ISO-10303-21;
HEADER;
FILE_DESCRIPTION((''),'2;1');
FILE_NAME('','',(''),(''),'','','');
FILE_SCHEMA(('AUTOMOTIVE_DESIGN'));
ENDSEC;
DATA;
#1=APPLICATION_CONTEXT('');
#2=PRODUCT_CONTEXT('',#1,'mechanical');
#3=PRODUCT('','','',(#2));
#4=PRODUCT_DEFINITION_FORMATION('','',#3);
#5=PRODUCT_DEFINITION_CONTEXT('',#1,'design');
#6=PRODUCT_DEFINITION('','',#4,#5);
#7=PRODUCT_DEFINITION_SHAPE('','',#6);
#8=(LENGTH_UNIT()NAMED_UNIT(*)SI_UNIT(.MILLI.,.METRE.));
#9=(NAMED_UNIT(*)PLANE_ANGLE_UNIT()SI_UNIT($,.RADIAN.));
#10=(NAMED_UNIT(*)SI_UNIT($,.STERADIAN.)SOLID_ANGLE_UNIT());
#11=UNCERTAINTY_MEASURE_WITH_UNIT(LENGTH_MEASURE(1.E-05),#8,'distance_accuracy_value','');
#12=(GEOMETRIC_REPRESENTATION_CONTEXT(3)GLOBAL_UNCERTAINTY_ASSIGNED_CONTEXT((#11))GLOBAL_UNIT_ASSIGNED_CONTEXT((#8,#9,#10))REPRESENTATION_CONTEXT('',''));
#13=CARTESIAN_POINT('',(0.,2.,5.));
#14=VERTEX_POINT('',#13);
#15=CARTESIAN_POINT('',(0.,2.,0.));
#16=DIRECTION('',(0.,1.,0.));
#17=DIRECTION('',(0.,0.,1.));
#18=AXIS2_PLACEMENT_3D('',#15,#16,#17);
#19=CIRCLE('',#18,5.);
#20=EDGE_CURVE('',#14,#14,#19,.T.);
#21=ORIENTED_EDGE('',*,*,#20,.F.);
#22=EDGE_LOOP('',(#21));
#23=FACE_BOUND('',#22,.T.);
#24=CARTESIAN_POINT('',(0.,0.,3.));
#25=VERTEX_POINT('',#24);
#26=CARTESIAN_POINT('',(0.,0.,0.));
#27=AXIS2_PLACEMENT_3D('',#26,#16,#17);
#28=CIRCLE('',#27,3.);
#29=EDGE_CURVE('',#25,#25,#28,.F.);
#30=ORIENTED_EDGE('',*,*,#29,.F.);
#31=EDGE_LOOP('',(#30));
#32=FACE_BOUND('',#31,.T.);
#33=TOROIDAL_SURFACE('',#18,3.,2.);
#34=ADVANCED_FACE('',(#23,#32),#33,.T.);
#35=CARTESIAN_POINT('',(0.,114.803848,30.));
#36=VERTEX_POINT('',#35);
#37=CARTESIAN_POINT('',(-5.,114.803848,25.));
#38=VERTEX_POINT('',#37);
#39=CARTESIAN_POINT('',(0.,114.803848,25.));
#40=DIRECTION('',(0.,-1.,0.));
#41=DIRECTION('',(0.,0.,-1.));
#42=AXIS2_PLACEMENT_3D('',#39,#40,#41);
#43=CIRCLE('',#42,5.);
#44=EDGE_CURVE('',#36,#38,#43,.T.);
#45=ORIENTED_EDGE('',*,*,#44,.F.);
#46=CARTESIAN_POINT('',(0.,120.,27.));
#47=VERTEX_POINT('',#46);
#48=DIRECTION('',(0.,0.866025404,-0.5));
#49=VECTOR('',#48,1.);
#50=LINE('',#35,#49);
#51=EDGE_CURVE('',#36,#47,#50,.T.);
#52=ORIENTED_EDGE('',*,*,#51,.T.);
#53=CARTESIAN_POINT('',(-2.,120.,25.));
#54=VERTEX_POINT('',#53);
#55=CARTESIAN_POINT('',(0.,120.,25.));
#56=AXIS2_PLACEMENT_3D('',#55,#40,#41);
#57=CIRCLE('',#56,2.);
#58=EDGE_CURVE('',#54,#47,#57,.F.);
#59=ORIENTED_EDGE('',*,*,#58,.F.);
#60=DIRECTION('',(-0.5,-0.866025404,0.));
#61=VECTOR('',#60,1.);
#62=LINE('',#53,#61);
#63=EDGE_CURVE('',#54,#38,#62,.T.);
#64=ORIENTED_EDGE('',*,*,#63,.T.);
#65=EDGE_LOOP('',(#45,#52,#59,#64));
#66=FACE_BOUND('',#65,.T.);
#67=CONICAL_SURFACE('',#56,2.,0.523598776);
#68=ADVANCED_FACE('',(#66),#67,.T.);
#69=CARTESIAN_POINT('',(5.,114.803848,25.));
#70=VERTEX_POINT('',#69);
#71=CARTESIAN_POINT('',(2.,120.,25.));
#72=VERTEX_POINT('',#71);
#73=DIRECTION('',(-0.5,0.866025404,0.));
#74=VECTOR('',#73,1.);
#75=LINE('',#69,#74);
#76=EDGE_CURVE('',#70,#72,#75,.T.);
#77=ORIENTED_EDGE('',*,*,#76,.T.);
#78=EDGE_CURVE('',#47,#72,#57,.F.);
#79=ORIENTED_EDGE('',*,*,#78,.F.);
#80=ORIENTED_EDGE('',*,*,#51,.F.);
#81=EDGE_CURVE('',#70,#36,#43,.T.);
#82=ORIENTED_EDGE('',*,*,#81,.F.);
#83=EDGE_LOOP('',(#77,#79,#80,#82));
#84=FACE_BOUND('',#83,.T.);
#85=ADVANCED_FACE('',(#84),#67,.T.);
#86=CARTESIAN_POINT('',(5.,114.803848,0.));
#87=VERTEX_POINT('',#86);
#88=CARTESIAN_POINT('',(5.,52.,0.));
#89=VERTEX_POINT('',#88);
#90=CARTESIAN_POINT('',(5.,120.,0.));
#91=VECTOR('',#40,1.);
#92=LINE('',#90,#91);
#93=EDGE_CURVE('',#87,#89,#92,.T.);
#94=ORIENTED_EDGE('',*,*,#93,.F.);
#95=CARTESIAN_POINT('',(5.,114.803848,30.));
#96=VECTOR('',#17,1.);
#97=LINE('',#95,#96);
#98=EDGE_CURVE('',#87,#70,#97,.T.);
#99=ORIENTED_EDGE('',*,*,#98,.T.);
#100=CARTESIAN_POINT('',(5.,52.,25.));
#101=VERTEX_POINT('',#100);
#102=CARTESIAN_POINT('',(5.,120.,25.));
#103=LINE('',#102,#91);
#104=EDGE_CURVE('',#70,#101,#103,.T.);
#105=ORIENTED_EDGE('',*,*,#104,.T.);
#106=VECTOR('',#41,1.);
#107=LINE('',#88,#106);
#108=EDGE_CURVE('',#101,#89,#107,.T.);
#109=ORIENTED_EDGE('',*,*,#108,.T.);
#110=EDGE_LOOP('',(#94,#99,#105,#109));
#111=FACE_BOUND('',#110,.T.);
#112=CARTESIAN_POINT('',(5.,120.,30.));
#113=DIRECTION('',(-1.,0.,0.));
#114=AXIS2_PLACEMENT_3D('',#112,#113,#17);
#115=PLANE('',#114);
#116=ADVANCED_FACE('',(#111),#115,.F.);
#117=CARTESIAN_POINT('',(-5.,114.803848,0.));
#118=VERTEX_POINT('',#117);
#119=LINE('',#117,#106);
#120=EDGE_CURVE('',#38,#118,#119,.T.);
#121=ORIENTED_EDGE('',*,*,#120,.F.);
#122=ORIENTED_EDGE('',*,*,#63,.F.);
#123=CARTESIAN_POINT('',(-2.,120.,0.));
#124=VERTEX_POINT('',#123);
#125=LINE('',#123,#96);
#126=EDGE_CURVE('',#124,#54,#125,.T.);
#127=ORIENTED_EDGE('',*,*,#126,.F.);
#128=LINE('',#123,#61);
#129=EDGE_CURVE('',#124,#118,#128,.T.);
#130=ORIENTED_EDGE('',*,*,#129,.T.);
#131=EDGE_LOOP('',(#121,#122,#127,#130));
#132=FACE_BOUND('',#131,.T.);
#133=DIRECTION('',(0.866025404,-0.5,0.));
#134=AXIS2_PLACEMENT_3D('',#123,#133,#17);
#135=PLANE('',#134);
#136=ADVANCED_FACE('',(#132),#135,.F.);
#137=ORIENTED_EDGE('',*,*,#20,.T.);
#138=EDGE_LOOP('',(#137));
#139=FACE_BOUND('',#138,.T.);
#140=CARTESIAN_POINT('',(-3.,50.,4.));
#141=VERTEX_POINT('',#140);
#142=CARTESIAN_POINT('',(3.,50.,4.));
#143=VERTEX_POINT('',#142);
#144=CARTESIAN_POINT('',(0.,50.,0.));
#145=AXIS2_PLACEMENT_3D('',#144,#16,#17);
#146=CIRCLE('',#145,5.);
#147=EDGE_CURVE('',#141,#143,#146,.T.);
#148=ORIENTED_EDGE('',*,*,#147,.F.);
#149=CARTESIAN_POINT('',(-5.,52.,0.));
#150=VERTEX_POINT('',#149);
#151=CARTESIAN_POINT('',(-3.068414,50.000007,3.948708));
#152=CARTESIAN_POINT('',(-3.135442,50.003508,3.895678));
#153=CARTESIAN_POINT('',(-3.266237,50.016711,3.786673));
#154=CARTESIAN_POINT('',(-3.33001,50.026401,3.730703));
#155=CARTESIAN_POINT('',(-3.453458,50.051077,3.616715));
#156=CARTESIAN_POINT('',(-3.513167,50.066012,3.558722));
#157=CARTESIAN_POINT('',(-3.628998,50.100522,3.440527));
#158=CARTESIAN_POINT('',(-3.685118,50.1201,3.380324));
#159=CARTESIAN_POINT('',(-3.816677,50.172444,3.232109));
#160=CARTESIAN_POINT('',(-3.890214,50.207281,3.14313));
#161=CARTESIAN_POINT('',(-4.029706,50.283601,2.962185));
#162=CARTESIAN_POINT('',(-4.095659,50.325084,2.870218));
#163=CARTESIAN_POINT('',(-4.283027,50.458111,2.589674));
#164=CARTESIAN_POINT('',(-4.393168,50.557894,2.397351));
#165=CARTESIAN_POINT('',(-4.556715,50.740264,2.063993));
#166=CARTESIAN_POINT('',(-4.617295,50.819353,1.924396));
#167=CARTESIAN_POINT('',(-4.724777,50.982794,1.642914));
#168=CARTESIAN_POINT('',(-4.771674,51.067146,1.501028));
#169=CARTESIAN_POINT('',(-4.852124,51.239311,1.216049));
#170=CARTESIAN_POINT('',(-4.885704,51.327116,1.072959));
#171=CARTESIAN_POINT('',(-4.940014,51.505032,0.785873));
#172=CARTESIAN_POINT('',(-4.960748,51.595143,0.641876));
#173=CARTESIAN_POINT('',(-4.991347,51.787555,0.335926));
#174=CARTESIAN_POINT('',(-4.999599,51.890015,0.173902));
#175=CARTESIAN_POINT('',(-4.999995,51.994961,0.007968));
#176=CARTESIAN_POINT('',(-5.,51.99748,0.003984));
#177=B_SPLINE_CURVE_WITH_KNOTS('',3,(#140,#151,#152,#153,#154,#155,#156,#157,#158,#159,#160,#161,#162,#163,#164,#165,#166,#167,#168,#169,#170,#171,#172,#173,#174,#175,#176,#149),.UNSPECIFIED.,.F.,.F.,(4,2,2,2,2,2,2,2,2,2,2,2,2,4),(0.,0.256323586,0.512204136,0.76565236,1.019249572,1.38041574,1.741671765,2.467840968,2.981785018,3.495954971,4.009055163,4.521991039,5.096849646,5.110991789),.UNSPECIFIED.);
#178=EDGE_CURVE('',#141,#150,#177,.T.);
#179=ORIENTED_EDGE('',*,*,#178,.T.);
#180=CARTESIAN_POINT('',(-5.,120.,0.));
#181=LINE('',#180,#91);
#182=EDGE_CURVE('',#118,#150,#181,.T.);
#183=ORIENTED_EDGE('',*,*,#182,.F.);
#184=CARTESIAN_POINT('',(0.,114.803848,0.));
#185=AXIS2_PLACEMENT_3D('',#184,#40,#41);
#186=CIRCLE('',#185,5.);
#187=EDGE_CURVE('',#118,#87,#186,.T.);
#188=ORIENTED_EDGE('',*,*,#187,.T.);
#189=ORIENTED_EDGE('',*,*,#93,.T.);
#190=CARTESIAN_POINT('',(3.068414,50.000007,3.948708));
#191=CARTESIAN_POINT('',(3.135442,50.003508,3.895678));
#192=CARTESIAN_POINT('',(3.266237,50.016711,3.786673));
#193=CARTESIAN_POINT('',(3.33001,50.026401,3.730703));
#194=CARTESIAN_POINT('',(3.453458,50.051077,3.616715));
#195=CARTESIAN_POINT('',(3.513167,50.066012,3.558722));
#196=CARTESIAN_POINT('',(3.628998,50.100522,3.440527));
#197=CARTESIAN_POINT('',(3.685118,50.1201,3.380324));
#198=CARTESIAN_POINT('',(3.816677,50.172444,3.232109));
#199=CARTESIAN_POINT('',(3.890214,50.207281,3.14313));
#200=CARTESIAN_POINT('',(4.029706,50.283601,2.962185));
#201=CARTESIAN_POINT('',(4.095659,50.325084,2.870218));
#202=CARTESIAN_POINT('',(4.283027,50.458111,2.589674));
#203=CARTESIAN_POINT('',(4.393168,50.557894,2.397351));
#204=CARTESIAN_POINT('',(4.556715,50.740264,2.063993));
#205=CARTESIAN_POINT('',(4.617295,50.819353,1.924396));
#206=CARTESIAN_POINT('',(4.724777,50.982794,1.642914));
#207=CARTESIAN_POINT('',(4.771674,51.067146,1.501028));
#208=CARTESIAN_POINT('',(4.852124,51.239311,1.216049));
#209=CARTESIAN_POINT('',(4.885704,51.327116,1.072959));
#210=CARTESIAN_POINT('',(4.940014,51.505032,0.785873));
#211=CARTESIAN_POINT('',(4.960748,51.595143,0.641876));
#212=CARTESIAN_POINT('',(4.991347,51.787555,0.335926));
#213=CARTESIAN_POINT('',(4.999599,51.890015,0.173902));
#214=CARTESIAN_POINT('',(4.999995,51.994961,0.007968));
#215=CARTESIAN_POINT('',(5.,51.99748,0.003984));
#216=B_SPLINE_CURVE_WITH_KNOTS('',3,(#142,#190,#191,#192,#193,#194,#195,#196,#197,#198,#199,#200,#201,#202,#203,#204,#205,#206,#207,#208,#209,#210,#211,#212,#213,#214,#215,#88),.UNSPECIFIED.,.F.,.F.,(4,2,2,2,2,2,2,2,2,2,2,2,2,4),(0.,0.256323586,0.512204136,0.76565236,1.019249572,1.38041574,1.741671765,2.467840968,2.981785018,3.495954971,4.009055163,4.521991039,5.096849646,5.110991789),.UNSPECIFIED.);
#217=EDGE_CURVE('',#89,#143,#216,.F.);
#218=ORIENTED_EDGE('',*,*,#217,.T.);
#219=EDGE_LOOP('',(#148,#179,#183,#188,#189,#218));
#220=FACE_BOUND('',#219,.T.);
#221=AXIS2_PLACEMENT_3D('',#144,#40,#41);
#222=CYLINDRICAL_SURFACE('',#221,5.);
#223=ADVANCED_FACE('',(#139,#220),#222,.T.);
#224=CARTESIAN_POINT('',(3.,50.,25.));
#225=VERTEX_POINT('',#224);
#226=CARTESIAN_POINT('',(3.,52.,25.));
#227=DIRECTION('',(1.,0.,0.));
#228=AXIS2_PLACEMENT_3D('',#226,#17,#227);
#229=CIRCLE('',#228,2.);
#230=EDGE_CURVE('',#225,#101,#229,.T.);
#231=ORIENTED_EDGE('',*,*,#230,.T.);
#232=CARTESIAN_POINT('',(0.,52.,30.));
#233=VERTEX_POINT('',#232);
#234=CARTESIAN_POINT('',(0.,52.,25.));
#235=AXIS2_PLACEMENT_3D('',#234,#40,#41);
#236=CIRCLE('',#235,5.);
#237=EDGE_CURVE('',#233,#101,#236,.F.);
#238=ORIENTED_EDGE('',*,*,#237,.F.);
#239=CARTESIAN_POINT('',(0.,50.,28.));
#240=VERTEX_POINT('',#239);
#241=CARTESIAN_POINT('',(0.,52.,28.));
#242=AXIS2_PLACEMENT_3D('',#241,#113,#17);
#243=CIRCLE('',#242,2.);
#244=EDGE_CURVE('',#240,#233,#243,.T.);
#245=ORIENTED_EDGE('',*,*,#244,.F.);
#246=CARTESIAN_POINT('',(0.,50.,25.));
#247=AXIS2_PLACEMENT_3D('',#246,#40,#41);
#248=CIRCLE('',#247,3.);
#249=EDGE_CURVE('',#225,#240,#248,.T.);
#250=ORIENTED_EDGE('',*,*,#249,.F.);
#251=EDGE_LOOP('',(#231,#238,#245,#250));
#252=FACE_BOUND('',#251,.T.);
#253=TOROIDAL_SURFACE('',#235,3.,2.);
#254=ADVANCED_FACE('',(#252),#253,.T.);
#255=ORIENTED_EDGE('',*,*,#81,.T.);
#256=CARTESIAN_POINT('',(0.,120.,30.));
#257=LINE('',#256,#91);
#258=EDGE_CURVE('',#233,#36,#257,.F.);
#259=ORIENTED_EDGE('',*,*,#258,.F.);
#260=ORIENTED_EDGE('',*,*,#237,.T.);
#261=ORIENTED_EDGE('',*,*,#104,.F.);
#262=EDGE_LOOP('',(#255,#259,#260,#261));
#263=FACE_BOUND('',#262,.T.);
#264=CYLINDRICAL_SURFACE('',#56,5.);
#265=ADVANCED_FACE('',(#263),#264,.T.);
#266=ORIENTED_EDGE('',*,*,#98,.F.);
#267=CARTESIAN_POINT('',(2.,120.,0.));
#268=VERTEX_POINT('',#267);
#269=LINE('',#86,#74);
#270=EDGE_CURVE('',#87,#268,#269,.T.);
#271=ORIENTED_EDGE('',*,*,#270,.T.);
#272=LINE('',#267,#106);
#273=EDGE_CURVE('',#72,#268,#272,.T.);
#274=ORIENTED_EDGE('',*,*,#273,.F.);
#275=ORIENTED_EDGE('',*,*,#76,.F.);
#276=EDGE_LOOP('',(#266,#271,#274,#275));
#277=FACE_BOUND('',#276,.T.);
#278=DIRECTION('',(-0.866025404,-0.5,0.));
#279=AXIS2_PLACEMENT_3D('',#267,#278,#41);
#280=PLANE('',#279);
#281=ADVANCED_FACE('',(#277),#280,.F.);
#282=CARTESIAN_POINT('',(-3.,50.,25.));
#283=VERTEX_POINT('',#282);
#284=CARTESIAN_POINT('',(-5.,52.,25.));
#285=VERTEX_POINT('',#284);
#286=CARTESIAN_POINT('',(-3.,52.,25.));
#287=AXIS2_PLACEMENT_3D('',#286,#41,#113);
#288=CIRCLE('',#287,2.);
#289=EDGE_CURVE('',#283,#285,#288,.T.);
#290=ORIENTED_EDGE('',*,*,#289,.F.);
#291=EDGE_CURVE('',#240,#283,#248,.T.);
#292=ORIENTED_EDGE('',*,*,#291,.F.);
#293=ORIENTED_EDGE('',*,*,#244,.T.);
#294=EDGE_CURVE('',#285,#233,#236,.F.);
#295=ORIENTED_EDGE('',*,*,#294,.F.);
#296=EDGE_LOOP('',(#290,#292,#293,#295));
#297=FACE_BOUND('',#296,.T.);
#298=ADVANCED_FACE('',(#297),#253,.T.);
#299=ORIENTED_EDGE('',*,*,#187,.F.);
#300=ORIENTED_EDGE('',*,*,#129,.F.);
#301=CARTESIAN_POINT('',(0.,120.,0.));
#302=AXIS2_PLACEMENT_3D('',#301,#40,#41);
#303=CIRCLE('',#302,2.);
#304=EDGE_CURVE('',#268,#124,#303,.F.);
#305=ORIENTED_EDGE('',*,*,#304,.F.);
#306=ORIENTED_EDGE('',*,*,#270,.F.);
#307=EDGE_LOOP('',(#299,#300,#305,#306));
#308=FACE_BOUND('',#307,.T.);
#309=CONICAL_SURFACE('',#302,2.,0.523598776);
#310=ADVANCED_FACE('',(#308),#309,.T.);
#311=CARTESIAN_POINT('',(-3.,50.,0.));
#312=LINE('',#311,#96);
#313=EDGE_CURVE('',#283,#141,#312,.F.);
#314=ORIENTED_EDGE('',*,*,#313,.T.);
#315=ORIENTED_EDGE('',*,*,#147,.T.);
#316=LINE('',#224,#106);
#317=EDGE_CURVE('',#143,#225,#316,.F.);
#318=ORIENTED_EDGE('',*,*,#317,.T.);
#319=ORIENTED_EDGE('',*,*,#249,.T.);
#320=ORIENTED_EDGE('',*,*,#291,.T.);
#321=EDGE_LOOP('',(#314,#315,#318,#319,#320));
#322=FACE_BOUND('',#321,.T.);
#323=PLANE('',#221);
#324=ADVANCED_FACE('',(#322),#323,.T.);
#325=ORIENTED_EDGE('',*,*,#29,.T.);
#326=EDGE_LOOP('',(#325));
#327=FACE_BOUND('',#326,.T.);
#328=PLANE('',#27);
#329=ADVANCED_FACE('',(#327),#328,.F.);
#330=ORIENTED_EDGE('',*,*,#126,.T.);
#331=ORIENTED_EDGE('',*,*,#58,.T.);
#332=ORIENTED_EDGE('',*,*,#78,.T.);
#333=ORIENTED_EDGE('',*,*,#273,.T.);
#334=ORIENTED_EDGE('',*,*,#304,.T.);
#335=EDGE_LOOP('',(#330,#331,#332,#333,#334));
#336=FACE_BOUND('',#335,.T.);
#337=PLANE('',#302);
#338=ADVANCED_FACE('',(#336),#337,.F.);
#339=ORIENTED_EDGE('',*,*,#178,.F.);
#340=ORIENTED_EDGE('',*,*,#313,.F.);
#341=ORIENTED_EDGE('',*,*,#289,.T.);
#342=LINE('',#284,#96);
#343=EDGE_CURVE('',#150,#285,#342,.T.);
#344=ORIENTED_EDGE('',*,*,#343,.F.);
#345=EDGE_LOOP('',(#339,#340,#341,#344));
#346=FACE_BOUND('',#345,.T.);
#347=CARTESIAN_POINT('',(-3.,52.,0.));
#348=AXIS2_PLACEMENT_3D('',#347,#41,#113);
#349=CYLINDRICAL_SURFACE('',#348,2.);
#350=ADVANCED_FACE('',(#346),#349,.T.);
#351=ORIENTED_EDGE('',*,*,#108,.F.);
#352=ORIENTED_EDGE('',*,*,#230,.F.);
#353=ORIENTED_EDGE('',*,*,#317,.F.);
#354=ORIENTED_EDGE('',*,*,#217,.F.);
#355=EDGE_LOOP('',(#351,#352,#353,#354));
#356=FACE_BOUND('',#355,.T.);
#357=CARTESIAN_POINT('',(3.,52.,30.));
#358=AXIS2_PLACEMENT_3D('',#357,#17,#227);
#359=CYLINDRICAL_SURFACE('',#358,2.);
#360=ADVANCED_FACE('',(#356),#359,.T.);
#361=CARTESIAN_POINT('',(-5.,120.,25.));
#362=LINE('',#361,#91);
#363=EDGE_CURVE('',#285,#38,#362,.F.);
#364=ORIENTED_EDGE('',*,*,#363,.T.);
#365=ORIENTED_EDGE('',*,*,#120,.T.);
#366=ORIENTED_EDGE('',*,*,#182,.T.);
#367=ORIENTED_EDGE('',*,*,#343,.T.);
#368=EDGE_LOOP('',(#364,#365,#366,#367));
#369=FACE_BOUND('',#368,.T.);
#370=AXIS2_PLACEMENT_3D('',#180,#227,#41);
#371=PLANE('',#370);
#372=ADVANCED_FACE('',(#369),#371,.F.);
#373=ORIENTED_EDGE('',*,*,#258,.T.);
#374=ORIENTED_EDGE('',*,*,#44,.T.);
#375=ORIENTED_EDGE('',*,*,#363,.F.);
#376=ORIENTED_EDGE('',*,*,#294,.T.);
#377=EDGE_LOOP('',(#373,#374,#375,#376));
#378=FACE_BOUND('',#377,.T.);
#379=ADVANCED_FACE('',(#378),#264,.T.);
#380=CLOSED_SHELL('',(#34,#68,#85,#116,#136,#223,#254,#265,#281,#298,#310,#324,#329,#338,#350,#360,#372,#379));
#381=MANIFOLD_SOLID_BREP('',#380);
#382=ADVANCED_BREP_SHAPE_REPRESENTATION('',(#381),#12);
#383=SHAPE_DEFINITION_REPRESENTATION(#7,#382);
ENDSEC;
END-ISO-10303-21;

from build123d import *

# Parameters (mm, degrees)
SKETCH1_R           = 5
BOSS_EXTRUDE1_DEPTH = 50
BOSS_EXTRUDE2_DEPTH = 70
FILLET1_R           = 5
FILLET2_R           = 2
FILLET3_R           = 2
CHAMFER1_SIZE       = 3
CHAMFER1_SIZE2      = 5.196152423


# Some blends are built 0.0001 mm under size
with BuildPart() as part:
    # Sketch1 → Boss-Extrude1 (new body)
    with BuildSketch(Plane(origin=(0, 0, 0), x_dir=(1, 0, 0), z_dir=(0, 1, 0))):
        with Locations(Location((0, 0, 0), (0, 0, 270))):
            Circle(SKETCH1_R)
    extrude(amount=BOSS_EXTRUDE1_DEPTH)

    # Sketch2 → Boss-Extrude2 (add)
    with BuildSketch(Plane(origin=(0, 50, 0), x_dir=(1, 0, 0), z_dir=(0, 1, 0))):
        with BuildLine():
            Line((-5, 0), (-5, -30))
            Line((-5, -30), (5, -30))
            Line((5, -30), (5, 0))
            ThreePointArc((5, 0), (0, 5), (-5, 0))
        make_face()
    extrude(amount=BOSS_EXTRUDE2_DEPTH)

    # Fillet1
    fillet1_edges = [part.edges().sort_by_distance(p)[0] for p in [
        (-5, 85, 30),
        (5, 85, 30),
    ]]
    fillet(fillet1_edges, radius=FILLET1_R - 0.0001)  # a hair under: the kernel refuses the full size

    # Fillet2
    # the kernel refuses this fillet: 2 mm, written as the material it takes off along each edge
    with BuildSketch(Plane(origin=(5, 50, 25.0001), x_dir=(-1, 0, 0), z_dir=(0, 0, -1))) as fillet2_piece_1_section:
        with BuildLine():
            CenterArc((FILLET2_R, FILLET2_R), FILLET2_R, 180, 90)
            Line((0, FILLET2_R), (0, 0))
            Line((0, 0), (FILLET2_R, 0))
        make_face()
    fillet2_piece_1 = extrude(amount=30.0001, mode=Mode.PRIVATE)
    fillet2_piece_1 = fillet2_piece_1 - Plane(origin=(0, 50.338854102, 0), x_dir=(0, 0, 1), z_dir=(0, -1, 0)) * Cylinder(5, 69, mode=Mode.PRIVATE)
    add(fillet2_piece_1, mode=Mode.SUBTRACT)
    with BuildSketch(Plane(origin=(0.0001, 50, 25.0001), x_dir=(1, 0, 0), z_dir=(0, 0, -1))) as fillet2_piece_2:
        with BuildLine():
            CenterArc((4.9999 - FILLET2_R, -FILLET2_R), FILLET2_R, 0, 90)
            Line((4.9999, -FILLET2_R), (4.9999, 0))
            Line((4.9999, 0), (4.9999 - FILLET2_R, 0))
        make_face()
    revolve(axis=Axis((0.0001, 50, 25.0001), (0, -1, 0)), revolution_arc=90, mode=Mode.SUBTRACT)
    with BuildSketch(Plane(origin=(-0.0001, 50, 25.0001), x_dir=(0, 0, 1), z_dir=(1, 0, 0))) as fillet2_piece_3:
        with BuildLine():
            CenterArc((4.9999 - FILLET2_R, -FILLET2_R), FILLET2_R, 0, 90)
            Line((4.9999, -FILLET2_R), (4.9999, 0))
            Line((4.9999, 0), (4.9999 - FILLET2_R, 0))
        make_face()
    revolve(axis=Axis((-0.0001, 50, 25.0001), (0, -1, 0)), revolution_arc=90, mode=Mode.SUBTRACT)
    with BuildSketch(Plane(origin=(-5, 50, -5), x_dir=(1, 0, 0), z_dir=(0, 0, 1))) as fillet2_piece_4_section:
        with BuildLine():
            CenterArc((FILLET2_R, FILLET2_R), FILLET2_R, 180, 90)
            Line((0, FILLET2_R), (0, 0))
            Line((0, 0), (FILLET2_R, 0))
        make_face()
    fillet2_piece_4 = extrude(amount=30.0001, mode=Mode.PRIVATE)
    fillet2_piece_4 = fillet2_piece_4 - Plane(origin=(0, 50.465433579, 0), x_dir=(0, 0, 1), z_dir=(0, -1, 0)) * Cylinder(5, 69, mode=Mode.PRIVATE)
    add(fillet2_piece_4, mode=Mode.SUBTRACT)
    with BuildSketch(Plane(origin=(-0.0001, 50, 30), x_dir=(0, 0, -1), z_dir=(1, 0, 0))) as fillet2_piece_5:
        with BuildLine():
            CenterArc((FILLET2_R, FILLET2_R), FILLET2_R, 180, 90)
            Line((0, FILLET2_R), (0, 0))
            Line((0, 0), (FILLET2_R, 0))
        make_face()
    extrude(amount=0.0002, mode=Mode.SUBTRACT)

    # Fillet3
    fillet3_edges = [part.edges().sort_by_distance(p)[0] for p in [
        (0, 0, -5),
    ]]
    fillet(fillet3_edges, radius=FILLET3_R)

    # Chamfer1
    chamfer1_edges = [part.edges().sort_by_distance(p)[0] for p in [
        (5, 120, 12.50005),
        (3.535563195, 120, 28.535563195),
        (-3.535563195, 120, 28.535563195),
        (0, 120, -5),
        (-5, 120, 12.50005),
    ]]
    chamfer1_side = [part.faces().sort_by_distance(p)[0] for p in [
        (0, 120, 12.500020673),
    ]]
    chamfer(chamfer1_edges, length=CHAMFER1_SIZE, length2=CHAMFER1_SIZE2, reference=chamfer1_side[0])


solid = part.part
